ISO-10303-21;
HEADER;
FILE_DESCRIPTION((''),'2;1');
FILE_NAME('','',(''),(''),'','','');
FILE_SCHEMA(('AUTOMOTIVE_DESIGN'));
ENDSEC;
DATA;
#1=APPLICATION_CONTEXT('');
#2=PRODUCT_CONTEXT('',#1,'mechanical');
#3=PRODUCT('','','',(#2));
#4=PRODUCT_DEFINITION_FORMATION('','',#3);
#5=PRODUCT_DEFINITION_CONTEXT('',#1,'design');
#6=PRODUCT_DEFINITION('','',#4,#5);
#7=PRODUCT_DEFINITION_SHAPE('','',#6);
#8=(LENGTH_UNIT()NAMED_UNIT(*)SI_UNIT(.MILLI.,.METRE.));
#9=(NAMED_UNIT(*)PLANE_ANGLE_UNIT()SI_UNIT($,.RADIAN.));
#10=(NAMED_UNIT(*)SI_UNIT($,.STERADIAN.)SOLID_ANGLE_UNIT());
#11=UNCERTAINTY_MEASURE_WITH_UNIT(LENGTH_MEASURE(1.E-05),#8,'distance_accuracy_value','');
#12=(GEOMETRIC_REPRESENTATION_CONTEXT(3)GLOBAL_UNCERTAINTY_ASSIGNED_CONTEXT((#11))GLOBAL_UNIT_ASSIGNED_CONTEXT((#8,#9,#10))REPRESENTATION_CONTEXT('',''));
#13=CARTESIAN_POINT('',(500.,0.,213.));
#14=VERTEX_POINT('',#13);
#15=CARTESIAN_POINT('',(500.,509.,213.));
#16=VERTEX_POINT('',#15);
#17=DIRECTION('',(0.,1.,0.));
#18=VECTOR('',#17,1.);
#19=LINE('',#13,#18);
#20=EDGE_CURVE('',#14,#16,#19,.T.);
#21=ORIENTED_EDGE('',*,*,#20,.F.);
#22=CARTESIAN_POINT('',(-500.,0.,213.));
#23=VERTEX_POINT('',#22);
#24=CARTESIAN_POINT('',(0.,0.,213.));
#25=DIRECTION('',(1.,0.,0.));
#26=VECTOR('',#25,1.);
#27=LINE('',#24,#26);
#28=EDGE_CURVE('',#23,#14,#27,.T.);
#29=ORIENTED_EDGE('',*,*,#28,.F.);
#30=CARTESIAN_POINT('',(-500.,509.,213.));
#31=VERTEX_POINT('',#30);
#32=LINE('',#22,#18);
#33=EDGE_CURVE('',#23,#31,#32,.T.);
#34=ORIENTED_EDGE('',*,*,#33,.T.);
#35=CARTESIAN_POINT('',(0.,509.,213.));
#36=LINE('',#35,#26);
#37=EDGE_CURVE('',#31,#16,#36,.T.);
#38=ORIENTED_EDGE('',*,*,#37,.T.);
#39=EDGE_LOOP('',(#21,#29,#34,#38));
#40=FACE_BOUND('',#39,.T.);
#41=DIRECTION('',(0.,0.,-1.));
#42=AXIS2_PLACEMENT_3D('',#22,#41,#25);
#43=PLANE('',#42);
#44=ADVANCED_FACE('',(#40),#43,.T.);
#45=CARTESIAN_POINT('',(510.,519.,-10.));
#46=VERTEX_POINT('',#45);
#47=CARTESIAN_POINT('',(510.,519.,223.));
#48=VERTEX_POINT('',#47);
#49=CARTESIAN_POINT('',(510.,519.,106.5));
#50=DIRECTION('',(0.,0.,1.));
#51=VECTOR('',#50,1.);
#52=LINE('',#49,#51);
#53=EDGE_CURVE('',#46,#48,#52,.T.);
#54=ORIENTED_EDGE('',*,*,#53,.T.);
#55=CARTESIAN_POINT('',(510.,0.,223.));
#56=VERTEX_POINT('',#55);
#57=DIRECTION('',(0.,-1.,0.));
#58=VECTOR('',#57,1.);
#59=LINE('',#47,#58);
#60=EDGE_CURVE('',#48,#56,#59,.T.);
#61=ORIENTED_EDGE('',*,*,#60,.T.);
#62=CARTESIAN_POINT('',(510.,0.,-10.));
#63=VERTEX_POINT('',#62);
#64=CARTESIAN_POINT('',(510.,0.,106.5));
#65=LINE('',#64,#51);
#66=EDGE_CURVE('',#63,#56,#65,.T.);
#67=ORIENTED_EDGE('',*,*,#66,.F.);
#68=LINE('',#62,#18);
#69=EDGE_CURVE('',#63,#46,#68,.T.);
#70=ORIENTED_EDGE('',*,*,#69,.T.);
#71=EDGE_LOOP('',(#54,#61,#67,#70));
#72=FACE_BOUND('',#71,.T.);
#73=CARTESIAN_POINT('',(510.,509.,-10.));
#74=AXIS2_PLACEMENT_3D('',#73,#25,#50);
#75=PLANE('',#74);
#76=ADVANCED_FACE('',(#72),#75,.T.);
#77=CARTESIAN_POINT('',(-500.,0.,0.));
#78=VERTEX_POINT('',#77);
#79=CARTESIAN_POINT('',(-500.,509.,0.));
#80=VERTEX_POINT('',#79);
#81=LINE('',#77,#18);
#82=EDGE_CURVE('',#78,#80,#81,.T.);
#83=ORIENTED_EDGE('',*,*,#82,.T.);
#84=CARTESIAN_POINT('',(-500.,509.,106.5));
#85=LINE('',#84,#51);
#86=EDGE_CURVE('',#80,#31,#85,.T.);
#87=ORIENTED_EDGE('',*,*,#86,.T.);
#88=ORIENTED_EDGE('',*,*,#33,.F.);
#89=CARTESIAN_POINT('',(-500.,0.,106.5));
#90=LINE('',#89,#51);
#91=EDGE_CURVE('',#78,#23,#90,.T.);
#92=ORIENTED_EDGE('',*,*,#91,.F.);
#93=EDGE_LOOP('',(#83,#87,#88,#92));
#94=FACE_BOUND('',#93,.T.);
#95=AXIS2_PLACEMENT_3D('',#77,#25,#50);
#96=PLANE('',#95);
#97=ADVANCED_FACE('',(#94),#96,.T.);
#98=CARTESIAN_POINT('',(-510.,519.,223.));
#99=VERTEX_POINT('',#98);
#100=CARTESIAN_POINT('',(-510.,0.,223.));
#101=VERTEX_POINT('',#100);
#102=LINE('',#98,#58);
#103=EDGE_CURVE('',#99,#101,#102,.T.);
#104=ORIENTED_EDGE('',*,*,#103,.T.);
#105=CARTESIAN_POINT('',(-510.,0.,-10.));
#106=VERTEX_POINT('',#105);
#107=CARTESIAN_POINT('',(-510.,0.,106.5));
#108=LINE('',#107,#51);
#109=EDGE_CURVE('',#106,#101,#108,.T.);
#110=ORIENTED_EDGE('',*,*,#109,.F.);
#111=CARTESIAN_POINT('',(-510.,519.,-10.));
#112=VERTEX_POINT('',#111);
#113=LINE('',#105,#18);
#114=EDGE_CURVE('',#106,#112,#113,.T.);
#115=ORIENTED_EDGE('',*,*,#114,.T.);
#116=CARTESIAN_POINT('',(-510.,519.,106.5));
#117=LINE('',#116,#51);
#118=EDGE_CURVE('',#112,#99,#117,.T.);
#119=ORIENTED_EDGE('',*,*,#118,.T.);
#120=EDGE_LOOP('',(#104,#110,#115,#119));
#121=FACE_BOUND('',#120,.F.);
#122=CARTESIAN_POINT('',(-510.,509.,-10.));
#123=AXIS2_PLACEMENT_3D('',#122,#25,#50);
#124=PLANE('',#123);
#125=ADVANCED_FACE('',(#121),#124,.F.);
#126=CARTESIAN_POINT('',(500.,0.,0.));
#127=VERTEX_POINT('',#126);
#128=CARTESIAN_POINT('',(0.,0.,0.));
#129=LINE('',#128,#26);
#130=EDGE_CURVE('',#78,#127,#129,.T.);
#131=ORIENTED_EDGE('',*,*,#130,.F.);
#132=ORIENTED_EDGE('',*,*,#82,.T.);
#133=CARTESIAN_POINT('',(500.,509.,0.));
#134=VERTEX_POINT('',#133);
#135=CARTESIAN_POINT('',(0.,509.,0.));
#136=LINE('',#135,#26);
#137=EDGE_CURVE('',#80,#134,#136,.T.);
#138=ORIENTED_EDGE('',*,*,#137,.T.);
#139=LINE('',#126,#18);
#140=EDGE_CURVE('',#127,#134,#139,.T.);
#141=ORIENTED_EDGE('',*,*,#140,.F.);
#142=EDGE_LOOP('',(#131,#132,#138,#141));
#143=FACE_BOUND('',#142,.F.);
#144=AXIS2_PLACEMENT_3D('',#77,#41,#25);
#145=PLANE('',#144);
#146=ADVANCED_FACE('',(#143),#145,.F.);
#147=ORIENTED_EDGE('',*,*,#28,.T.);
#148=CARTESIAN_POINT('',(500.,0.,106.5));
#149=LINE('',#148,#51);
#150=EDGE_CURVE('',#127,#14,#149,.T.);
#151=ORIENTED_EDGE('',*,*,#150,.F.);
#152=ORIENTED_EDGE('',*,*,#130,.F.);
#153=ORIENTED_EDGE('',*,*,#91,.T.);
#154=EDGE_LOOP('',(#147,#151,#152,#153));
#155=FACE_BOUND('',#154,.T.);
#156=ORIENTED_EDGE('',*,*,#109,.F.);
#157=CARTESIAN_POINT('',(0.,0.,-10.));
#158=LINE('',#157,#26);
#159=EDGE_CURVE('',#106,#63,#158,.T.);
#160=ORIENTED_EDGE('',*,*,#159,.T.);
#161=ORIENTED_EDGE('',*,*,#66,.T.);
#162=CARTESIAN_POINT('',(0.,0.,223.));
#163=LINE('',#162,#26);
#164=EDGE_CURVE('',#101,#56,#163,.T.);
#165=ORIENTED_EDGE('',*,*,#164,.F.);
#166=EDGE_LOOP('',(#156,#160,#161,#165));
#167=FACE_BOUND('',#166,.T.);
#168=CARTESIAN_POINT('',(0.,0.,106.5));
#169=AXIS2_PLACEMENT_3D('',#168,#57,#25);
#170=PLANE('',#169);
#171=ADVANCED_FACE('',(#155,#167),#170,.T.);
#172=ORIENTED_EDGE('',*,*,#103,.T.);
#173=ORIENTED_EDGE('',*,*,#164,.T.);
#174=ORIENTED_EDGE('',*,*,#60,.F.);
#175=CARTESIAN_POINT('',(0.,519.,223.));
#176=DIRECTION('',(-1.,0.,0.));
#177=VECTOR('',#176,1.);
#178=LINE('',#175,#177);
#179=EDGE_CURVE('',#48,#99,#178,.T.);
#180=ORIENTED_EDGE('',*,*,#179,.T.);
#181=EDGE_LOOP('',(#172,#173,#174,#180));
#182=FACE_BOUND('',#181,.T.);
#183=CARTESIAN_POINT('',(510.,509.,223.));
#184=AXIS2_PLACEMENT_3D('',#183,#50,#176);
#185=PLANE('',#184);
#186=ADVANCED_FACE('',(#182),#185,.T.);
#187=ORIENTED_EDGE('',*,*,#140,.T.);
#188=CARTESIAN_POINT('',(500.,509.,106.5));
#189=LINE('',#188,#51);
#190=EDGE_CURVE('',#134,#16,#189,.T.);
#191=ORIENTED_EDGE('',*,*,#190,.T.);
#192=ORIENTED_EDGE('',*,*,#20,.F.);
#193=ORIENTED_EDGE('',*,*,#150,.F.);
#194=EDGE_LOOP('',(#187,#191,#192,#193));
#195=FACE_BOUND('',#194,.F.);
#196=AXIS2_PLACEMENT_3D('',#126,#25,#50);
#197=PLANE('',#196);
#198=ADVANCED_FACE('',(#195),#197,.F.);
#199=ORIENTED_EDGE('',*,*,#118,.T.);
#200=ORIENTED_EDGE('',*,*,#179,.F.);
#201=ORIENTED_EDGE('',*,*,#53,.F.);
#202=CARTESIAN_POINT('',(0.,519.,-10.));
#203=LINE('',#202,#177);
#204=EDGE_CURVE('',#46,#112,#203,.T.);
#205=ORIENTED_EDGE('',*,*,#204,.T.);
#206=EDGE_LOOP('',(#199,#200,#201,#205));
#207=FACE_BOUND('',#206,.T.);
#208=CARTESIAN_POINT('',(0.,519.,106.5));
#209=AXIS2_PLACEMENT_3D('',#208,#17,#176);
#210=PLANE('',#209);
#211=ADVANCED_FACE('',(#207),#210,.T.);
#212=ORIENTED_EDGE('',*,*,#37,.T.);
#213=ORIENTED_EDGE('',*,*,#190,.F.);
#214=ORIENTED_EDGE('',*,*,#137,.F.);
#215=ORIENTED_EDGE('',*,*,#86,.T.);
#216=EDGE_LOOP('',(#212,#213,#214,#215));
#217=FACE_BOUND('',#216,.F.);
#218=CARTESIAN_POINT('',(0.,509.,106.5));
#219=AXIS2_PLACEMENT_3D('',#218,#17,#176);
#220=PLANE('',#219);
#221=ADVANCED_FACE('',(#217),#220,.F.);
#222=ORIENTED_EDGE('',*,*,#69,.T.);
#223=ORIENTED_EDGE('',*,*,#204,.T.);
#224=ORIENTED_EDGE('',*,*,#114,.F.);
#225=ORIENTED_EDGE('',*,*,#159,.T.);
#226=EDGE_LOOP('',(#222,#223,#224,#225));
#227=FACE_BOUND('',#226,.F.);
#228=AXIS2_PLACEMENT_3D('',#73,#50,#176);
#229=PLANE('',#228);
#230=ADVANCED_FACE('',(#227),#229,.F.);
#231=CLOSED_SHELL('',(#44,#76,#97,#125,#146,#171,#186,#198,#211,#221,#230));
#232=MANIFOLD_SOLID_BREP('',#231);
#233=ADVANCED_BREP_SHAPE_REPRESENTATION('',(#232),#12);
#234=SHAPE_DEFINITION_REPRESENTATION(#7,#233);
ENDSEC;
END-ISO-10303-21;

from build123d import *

# Parameters (mm, degrees)
F0_W     = 1020
F0_H     = 233
F0_W_2   = 1000
F0_H_2   = 213
F1_DEPTH = 509
F2_W     = 1020
F2_H     = 233
F2_W_2   = 1000
F2_H_2   = 213
F3_DEPTH = 10


with BuildPart() as f1:
    # F0 (on Front) → F1 (new body)
    with BuildSketch(Plane.XZ):
        with Locations((0, 106.5)):
            Rectangle(F0_W, F0_H)
        with Locations((0, 106.5)):
            Rectangle(F0_W_2, F0_H_2, mode=Mode.SUBTRACT)
    extrude(amount=-F1_DEPTH)

    # F2 (on face) → F3 (join)
    with BuildSketch(Plane(origin=(0, 509, 0), x_dir=(-1, 0, 0), z_dir=(0, 1, 0))):
        with Locations((0, 106.5)):
            Rectangle(F2_W, F2_H)
        with Locations((0, 106.5)):
            Rectangle(F2_W_2, F2_H_2, mode=Mode.SUBTRACT)
        with Locations((0, 106.5)):
            Rectangle(F2_W_2, F2_H_2)
    extrude(amount=F3_DEPTH)


solid = f1.part
